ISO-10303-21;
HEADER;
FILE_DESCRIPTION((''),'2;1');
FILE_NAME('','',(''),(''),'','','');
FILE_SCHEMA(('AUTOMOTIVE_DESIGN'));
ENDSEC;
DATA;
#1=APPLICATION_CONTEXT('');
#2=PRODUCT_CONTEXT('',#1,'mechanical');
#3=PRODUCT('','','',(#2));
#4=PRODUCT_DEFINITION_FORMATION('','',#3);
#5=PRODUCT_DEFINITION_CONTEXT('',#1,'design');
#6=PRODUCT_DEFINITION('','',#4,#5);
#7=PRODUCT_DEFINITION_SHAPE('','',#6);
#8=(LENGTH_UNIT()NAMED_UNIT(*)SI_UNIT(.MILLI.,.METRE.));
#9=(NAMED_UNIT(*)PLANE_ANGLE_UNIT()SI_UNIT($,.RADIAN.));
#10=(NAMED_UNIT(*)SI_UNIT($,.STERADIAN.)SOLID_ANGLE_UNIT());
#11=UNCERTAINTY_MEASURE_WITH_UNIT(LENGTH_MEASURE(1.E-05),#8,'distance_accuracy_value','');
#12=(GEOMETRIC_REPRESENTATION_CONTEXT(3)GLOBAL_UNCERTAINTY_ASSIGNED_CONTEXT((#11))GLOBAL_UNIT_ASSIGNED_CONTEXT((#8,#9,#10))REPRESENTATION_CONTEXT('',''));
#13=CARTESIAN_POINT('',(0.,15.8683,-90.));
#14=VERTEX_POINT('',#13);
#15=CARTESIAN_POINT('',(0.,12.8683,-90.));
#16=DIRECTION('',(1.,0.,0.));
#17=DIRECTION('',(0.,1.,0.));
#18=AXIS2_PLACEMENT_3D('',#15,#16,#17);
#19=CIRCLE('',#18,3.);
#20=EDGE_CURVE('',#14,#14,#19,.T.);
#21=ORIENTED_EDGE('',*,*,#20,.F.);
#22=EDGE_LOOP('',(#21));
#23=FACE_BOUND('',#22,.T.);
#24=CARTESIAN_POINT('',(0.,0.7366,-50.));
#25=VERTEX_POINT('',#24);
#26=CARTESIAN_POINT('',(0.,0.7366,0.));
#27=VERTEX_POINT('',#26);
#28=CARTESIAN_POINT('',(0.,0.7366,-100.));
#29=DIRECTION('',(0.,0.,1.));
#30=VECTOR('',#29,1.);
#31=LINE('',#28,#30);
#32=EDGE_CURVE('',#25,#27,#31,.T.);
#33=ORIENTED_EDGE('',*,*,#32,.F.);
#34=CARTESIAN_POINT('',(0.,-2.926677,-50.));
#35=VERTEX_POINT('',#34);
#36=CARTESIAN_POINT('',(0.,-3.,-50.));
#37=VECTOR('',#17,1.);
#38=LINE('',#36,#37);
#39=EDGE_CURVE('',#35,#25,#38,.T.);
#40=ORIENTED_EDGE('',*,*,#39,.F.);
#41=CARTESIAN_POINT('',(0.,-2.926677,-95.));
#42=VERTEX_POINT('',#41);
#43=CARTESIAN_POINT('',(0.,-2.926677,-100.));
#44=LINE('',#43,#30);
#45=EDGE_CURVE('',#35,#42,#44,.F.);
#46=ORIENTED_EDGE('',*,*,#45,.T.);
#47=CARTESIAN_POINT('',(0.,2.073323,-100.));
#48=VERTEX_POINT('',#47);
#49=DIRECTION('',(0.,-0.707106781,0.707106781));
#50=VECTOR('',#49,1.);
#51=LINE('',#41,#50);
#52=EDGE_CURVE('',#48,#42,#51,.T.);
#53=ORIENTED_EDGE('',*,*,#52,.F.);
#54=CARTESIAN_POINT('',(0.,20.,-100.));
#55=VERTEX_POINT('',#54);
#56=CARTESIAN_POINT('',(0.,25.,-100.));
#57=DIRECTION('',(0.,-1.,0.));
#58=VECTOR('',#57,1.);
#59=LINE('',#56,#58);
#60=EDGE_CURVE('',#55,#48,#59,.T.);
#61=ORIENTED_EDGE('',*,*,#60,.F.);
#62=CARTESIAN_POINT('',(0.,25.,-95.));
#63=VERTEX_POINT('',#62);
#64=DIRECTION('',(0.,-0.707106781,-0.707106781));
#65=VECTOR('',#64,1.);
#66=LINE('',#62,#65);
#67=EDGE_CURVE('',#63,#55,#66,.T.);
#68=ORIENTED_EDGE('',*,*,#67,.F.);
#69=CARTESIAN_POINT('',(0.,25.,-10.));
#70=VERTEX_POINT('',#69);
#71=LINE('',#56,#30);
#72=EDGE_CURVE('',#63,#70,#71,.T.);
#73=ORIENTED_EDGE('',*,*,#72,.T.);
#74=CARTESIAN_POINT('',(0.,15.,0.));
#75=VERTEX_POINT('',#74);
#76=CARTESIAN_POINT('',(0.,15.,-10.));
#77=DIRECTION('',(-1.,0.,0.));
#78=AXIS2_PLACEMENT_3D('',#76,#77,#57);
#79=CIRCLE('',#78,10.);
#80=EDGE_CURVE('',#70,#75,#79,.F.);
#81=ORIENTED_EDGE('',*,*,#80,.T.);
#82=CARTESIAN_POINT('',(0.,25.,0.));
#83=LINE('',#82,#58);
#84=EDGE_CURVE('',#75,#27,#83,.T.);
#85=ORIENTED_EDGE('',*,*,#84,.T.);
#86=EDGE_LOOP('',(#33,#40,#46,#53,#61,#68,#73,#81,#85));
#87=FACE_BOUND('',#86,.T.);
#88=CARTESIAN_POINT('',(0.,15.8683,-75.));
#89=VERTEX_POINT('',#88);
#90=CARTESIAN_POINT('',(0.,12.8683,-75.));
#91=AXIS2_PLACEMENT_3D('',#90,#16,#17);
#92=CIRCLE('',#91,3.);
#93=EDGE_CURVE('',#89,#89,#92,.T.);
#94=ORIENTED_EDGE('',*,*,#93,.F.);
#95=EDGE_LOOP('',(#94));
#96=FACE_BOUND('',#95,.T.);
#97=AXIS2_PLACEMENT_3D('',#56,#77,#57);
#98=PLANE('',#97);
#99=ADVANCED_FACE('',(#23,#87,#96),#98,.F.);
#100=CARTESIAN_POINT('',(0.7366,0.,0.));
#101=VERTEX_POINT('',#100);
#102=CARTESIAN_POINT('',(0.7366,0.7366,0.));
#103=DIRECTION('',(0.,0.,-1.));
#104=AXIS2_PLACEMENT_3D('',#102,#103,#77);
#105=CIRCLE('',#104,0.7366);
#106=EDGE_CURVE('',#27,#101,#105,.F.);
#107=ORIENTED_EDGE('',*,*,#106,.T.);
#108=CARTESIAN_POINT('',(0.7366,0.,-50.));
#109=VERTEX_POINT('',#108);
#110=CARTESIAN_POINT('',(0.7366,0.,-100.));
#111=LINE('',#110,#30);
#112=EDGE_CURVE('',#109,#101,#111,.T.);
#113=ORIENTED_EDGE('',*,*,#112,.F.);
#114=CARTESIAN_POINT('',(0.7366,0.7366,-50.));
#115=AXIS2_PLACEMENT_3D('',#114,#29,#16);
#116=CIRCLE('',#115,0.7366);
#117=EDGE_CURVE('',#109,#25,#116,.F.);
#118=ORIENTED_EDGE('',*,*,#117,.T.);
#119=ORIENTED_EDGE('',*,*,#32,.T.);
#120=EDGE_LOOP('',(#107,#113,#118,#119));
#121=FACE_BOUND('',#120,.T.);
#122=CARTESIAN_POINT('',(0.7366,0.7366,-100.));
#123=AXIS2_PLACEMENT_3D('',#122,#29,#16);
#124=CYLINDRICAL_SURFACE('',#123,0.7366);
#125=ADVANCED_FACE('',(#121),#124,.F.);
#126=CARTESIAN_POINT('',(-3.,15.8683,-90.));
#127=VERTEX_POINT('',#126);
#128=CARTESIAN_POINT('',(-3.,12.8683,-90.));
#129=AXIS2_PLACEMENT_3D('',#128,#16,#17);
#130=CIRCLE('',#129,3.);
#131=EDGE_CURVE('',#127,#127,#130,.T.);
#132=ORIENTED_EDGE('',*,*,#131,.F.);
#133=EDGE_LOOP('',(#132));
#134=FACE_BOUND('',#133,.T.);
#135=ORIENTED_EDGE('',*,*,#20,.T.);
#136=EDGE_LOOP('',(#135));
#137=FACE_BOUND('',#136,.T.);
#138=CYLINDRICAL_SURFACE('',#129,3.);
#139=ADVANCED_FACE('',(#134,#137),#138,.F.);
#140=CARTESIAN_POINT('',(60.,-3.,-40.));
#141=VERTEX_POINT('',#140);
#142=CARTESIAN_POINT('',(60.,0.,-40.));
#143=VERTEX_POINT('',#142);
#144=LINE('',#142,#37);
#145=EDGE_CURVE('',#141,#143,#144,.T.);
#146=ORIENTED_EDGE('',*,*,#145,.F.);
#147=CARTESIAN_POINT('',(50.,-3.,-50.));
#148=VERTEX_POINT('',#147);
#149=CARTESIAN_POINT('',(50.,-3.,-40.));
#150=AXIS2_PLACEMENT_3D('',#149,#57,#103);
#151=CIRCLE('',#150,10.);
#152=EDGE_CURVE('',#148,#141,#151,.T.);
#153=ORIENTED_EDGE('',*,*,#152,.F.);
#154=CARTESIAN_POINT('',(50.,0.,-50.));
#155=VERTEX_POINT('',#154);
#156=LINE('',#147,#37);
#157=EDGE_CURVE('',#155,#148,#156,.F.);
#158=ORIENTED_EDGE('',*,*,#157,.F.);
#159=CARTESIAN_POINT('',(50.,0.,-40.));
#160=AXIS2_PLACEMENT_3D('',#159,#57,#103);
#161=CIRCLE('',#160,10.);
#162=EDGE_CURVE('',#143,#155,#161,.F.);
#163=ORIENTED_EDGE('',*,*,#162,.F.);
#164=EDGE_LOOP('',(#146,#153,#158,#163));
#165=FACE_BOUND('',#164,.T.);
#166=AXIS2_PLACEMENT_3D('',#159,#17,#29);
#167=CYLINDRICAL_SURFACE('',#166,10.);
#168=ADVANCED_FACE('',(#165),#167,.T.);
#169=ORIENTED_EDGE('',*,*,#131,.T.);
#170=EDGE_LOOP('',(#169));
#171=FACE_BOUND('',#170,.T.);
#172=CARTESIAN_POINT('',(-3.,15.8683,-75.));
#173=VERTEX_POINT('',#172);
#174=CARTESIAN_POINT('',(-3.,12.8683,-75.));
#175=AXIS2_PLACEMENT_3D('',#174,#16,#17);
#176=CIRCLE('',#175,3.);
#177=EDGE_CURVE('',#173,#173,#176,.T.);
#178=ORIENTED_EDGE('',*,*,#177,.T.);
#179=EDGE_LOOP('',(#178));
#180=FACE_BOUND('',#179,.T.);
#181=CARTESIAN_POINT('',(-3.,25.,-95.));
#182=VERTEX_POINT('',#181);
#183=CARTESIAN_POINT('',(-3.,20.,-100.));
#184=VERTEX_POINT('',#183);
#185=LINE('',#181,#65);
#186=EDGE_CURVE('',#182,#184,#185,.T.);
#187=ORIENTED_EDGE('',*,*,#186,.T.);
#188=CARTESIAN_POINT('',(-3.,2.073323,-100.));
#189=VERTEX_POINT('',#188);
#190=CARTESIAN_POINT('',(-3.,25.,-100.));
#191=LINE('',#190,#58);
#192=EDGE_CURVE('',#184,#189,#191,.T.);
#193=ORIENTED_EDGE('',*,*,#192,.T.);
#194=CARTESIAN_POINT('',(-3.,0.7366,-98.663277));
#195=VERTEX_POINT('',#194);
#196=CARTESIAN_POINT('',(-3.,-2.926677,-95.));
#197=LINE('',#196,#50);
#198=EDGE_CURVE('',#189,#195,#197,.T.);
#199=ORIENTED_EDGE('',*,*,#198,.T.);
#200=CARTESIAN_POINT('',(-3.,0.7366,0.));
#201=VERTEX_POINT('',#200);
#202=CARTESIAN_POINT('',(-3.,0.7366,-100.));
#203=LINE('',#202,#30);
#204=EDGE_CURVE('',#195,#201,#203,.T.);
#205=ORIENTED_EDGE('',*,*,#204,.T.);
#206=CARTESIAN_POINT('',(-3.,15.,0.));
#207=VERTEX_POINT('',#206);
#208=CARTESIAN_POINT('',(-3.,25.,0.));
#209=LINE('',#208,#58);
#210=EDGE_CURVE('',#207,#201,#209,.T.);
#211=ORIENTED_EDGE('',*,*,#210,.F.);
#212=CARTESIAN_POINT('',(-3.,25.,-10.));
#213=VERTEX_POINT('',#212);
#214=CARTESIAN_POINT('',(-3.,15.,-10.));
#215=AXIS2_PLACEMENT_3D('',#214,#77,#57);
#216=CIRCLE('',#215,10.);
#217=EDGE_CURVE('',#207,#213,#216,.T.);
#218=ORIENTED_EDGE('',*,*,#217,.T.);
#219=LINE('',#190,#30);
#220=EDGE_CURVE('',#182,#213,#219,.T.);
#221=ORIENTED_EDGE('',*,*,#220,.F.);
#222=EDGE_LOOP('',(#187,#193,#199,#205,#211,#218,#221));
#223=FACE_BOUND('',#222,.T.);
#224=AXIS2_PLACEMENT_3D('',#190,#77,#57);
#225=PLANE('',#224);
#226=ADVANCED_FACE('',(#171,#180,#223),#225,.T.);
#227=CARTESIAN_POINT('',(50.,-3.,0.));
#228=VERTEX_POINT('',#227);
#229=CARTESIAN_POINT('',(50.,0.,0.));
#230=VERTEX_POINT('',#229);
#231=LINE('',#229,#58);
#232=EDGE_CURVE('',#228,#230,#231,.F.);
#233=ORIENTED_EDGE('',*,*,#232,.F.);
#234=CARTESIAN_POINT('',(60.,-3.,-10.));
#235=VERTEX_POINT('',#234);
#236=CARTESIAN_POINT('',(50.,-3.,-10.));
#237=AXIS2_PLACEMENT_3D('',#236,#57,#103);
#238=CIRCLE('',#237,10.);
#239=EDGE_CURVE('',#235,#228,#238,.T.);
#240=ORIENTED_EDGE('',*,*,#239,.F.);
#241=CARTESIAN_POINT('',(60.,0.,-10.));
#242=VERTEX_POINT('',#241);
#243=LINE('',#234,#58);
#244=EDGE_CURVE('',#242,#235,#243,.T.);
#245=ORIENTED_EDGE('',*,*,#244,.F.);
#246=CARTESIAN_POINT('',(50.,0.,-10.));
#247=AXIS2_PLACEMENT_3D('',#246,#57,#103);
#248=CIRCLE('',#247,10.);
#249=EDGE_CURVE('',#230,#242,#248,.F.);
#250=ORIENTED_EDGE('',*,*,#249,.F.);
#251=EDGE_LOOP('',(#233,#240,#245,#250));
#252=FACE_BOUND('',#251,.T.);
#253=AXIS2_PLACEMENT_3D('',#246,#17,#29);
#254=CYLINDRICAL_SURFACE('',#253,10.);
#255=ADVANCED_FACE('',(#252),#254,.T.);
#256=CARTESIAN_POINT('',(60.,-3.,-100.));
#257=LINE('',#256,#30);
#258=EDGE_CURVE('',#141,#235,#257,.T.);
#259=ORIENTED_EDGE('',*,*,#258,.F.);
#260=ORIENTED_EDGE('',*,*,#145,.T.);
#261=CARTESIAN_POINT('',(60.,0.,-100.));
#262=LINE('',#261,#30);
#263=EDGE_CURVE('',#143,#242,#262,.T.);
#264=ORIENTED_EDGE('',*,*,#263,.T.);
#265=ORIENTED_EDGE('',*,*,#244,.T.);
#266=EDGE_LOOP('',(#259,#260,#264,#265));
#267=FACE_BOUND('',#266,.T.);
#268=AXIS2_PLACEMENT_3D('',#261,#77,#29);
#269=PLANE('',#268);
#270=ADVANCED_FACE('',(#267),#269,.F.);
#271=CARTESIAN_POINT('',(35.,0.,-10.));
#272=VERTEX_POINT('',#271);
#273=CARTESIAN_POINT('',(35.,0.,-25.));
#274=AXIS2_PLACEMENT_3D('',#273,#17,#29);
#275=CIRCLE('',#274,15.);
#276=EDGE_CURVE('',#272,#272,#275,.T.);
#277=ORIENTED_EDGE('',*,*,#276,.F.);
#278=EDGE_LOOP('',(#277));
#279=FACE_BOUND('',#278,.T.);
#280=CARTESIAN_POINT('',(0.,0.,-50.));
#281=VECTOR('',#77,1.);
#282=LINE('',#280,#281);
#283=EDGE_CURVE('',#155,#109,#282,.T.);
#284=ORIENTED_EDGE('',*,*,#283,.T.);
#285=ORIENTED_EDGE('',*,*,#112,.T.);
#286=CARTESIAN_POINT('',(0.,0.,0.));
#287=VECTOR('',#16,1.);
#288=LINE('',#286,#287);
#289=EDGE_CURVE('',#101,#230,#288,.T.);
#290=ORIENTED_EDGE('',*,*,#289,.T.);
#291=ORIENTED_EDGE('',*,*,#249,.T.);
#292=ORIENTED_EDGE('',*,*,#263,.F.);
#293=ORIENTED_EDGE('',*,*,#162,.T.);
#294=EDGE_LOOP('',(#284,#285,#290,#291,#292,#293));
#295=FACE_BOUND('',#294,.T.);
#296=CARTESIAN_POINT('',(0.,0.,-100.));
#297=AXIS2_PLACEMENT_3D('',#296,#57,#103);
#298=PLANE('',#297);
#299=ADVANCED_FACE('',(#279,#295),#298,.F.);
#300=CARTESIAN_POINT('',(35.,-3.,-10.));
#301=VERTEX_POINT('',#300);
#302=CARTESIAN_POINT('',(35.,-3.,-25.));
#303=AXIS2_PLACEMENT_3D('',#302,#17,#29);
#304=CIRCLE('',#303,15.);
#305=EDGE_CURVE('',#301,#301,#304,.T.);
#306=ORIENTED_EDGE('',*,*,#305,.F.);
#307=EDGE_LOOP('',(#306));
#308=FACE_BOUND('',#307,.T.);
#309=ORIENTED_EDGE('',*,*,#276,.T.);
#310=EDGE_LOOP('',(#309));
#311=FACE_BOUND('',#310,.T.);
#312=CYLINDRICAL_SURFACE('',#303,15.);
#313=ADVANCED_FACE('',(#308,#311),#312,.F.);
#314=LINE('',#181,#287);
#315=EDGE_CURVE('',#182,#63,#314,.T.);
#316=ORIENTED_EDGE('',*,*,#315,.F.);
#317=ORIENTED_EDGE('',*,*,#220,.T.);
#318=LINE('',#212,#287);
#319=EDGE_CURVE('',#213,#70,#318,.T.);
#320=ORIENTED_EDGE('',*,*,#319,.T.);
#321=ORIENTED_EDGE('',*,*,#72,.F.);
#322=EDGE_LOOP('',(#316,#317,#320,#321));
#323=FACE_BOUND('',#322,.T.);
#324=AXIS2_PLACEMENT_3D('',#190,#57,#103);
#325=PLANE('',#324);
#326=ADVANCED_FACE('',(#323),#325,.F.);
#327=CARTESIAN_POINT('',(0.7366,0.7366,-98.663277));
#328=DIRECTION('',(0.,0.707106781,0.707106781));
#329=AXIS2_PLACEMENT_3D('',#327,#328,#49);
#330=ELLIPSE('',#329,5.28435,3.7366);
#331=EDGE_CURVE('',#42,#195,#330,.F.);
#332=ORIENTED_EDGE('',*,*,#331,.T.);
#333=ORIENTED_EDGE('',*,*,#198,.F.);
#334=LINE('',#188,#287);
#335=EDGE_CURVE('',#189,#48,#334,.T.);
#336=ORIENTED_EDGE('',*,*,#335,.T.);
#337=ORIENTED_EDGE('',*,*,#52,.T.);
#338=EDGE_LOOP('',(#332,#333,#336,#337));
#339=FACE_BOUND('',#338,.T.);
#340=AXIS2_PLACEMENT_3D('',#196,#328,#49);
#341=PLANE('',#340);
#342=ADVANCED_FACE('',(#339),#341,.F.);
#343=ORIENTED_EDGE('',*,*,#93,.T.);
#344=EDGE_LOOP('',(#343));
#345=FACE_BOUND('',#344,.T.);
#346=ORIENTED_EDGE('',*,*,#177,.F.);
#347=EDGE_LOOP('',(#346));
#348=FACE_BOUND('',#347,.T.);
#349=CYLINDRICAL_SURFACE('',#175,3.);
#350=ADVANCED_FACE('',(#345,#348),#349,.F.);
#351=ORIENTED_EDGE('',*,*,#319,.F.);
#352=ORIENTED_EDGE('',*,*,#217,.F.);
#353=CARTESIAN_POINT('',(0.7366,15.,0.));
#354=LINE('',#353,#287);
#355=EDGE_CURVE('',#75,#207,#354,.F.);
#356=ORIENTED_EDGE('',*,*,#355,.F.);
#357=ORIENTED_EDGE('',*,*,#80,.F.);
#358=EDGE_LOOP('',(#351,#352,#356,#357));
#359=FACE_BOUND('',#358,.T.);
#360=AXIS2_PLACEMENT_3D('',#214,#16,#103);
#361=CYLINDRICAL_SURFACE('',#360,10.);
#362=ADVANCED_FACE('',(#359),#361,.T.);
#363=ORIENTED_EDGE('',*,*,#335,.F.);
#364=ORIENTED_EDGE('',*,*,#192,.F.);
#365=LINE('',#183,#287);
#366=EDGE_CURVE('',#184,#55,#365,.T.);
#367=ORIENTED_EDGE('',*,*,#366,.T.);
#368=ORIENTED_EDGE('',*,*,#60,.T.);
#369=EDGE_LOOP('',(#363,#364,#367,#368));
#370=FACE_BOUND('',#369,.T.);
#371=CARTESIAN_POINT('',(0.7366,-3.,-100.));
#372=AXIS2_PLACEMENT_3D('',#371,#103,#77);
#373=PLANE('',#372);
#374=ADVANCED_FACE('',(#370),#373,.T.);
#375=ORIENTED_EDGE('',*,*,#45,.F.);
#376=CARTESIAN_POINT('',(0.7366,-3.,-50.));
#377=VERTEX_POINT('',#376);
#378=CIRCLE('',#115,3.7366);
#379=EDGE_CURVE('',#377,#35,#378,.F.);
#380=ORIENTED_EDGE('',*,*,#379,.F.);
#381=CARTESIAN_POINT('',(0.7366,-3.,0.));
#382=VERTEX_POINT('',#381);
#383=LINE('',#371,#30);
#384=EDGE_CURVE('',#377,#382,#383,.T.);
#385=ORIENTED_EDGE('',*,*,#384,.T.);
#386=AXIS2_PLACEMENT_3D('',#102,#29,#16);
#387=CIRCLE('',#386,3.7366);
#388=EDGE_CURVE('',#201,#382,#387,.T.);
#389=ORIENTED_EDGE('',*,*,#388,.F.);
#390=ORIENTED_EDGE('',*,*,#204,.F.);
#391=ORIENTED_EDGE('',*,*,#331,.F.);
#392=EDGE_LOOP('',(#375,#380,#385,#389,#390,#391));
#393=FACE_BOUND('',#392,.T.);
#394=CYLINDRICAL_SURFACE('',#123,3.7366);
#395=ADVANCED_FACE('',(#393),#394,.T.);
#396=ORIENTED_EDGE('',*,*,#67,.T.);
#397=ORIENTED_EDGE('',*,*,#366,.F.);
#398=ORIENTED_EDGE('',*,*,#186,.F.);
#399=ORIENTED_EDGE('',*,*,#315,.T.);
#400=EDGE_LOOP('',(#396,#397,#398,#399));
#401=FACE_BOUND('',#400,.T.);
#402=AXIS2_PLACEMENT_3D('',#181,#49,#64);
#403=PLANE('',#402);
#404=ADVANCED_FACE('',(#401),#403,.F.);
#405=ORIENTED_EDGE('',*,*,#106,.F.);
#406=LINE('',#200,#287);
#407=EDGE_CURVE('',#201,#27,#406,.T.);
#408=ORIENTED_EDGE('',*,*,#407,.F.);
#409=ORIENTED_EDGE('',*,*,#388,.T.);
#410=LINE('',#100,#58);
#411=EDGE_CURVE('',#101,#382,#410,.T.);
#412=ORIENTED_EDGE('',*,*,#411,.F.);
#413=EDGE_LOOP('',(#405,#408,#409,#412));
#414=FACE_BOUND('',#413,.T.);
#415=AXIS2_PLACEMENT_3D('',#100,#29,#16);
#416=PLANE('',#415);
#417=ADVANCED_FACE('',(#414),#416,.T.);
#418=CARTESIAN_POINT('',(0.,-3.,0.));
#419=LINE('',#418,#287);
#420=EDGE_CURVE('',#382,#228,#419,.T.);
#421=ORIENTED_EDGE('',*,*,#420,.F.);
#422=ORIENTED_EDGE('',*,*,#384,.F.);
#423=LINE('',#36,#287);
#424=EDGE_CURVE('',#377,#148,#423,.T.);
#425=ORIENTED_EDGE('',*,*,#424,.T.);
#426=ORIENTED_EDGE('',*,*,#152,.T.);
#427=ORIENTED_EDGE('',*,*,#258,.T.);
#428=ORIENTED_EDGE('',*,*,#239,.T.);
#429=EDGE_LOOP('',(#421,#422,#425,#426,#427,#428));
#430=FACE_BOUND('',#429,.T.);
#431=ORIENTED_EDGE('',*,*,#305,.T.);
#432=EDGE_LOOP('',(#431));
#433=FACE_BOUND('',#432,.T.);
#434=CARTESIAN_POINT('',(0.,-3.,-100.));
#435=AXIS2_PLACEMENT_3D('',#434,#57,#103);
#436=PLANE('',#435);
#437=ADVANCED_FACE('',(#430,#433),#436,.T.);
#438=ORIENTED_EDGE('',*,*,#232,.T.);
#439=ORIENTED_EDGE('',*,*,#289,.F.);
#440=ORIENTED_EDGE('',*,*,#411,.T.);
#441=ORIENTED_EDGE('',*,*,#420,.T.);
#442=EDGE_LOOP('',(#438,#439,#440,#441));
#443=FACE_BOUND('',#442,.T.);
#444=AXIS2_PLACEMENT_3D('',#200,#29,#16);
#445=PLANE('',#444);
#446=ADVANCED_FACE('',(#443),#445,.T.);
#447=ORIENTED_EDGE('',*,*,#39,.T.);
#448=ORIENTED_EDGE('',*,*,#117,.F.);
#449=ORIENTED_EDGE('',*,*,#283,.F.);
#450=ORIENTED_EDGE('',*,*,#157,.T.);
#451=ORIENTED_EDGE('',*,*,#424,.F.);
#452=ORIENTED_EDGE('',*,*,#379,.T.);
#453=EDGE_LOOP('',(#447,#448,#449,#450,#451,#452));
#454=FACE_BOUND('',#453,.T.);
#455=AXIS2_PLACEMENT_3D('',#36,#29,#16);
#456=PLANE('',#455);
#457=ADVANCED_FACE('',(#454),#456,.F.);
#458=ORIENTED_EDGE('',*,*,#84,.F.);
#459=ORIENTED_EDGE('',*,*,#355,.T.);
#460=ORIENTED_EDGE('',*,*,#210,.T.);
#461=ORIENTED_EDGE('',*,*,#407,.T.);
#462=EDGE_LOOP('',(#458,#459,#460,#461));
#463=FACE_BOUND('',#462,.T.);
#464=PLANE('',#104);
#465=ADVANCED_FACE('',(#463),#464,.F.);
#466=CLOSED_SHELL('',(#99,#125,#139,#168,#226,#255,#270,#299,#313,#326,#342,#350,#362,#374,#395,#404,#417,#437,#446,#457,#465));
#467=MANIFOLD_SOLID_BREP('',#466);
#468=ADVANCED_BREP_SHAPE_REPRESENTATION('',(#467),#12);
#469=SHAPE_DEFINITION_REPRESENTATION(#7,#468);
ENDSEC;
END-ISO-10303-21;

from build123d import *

# Parameters (mm, degrees)
SM_BASE_FLANGE_1_DEPTH = 100
SKETCH_3_W             = 60
SKETCH_3_H             = 50
CUT_EXTRUDE_1_DEPTH    = 120.933314805
SKETCH_4_R             = 15
CUT_EXTRUDE_2_DEPTH    = 120.268604419
SKETCH_5_R             = 3
CUT_EXTRUDE_3_DEPTH    = 120.268604419
FILLET_1_R             = 10
CUT_EXTRUDE_4_DEPTH    = 120.268604419


# Sheet-metal steps are written as plain solids
with BuildPart() as part:
    # Sketch 1 → 基体-法兰1 (new body)
    with BuildSketch(Plane.XY):
        with BuildLine():
            Line((0, 25), (0, 0.7366))
            ThreePointArc((0, 0.7366), (0.215745145, 0.215745145), (0.7366, 0))
            Line((0.7366, 0), (60, 0))
            Line((60, 0), (60, -3))
            Line((60, -3), (0.7366, -3))
            ThreePointArc((0.7366, -3), (-1.905575199, -1.905575199), (-3, 0.7366))
            Line((-3, 0.7366), (-3, 25))
            Line((-3, 25), (0, 25))
        make_face()
    extrude(amount=-SM_BASE_FLANGE_1_DEPTH)

    # 草图3 → 切除-拉伸1 (cut, through all)
    with BuildSketch(Plane(origin=(0, 25, 0), x_dir=(1, 0, 0), z_dir=(0, 1, 0))):
        with Locations((30, 75)):
            Rectangle(SKETCH_3_W, SKETCH_3_H)
    extrude(amount=-CUT_EXTRUDE_1_DEPTH, mode=Mode.SUBTRACT)

    # 草图4 → 切除-拉伸2 (cut, through all)
    with BuildSketch(Plane(origin=(0, 0, 0), x_dir=(1, 0, 0), z_dir=(0, 1, 0))):
        with Locations(Location((35, 25, 0), (0, 0, 270))):
            Circle(SKETCH_4_R)
    extrude(amount=-CUT_EXTRUDE_2_DEPTH, mode=Mode.SUBTRACT)

    # 草图5 → 切除-拉伸3 (cut, through all)
    with BuildSketch(Plane(origin=(0, 0, 0), x_dir=(0, 0, -1), z_dir=(1, 0, 0))):
        with Locations(Location((75, 12.8683, 0), (0, 0, 90))):
            Circle(SKETCH_5_R)
        with Locations(Location((90, 12.8683, 0), (0, 0, 90))):
            Circle(SKETCH_5_R)
    extrude(amount=-CUT_EXTRUDE_3_DEPTH, mode=Mode.SUBTRACT)

    # 圆角1
    fillet_1_edges = [part.edges().sort_by_distance(p)[0] for p in [
        (60, -1.5, -50),
        (-1.5, 25, 0),
        (60, -1.5, 0),
    ]]
    fillet(fillet_1_edges, radius=FILLET_1_R)

    # 草图6 → 切除-拉伸4 (cut, through all)
    with BuildSketch(Plane(origin=(0, 0, 0), x_dir=(0, 0, -1), z_dir=(1, 0, 0))):
        Polygon((100, 25), (95, 25), (100, 20), align=None)
        Polygon((100, 2.073322779), (100, -2.926677221), (95, -2.926677221), align=None)
    extrude(amount=-CUT_EXTRUDE_4_DEPTH, mode=Mode.SUBTRACT)


solid = part.part
